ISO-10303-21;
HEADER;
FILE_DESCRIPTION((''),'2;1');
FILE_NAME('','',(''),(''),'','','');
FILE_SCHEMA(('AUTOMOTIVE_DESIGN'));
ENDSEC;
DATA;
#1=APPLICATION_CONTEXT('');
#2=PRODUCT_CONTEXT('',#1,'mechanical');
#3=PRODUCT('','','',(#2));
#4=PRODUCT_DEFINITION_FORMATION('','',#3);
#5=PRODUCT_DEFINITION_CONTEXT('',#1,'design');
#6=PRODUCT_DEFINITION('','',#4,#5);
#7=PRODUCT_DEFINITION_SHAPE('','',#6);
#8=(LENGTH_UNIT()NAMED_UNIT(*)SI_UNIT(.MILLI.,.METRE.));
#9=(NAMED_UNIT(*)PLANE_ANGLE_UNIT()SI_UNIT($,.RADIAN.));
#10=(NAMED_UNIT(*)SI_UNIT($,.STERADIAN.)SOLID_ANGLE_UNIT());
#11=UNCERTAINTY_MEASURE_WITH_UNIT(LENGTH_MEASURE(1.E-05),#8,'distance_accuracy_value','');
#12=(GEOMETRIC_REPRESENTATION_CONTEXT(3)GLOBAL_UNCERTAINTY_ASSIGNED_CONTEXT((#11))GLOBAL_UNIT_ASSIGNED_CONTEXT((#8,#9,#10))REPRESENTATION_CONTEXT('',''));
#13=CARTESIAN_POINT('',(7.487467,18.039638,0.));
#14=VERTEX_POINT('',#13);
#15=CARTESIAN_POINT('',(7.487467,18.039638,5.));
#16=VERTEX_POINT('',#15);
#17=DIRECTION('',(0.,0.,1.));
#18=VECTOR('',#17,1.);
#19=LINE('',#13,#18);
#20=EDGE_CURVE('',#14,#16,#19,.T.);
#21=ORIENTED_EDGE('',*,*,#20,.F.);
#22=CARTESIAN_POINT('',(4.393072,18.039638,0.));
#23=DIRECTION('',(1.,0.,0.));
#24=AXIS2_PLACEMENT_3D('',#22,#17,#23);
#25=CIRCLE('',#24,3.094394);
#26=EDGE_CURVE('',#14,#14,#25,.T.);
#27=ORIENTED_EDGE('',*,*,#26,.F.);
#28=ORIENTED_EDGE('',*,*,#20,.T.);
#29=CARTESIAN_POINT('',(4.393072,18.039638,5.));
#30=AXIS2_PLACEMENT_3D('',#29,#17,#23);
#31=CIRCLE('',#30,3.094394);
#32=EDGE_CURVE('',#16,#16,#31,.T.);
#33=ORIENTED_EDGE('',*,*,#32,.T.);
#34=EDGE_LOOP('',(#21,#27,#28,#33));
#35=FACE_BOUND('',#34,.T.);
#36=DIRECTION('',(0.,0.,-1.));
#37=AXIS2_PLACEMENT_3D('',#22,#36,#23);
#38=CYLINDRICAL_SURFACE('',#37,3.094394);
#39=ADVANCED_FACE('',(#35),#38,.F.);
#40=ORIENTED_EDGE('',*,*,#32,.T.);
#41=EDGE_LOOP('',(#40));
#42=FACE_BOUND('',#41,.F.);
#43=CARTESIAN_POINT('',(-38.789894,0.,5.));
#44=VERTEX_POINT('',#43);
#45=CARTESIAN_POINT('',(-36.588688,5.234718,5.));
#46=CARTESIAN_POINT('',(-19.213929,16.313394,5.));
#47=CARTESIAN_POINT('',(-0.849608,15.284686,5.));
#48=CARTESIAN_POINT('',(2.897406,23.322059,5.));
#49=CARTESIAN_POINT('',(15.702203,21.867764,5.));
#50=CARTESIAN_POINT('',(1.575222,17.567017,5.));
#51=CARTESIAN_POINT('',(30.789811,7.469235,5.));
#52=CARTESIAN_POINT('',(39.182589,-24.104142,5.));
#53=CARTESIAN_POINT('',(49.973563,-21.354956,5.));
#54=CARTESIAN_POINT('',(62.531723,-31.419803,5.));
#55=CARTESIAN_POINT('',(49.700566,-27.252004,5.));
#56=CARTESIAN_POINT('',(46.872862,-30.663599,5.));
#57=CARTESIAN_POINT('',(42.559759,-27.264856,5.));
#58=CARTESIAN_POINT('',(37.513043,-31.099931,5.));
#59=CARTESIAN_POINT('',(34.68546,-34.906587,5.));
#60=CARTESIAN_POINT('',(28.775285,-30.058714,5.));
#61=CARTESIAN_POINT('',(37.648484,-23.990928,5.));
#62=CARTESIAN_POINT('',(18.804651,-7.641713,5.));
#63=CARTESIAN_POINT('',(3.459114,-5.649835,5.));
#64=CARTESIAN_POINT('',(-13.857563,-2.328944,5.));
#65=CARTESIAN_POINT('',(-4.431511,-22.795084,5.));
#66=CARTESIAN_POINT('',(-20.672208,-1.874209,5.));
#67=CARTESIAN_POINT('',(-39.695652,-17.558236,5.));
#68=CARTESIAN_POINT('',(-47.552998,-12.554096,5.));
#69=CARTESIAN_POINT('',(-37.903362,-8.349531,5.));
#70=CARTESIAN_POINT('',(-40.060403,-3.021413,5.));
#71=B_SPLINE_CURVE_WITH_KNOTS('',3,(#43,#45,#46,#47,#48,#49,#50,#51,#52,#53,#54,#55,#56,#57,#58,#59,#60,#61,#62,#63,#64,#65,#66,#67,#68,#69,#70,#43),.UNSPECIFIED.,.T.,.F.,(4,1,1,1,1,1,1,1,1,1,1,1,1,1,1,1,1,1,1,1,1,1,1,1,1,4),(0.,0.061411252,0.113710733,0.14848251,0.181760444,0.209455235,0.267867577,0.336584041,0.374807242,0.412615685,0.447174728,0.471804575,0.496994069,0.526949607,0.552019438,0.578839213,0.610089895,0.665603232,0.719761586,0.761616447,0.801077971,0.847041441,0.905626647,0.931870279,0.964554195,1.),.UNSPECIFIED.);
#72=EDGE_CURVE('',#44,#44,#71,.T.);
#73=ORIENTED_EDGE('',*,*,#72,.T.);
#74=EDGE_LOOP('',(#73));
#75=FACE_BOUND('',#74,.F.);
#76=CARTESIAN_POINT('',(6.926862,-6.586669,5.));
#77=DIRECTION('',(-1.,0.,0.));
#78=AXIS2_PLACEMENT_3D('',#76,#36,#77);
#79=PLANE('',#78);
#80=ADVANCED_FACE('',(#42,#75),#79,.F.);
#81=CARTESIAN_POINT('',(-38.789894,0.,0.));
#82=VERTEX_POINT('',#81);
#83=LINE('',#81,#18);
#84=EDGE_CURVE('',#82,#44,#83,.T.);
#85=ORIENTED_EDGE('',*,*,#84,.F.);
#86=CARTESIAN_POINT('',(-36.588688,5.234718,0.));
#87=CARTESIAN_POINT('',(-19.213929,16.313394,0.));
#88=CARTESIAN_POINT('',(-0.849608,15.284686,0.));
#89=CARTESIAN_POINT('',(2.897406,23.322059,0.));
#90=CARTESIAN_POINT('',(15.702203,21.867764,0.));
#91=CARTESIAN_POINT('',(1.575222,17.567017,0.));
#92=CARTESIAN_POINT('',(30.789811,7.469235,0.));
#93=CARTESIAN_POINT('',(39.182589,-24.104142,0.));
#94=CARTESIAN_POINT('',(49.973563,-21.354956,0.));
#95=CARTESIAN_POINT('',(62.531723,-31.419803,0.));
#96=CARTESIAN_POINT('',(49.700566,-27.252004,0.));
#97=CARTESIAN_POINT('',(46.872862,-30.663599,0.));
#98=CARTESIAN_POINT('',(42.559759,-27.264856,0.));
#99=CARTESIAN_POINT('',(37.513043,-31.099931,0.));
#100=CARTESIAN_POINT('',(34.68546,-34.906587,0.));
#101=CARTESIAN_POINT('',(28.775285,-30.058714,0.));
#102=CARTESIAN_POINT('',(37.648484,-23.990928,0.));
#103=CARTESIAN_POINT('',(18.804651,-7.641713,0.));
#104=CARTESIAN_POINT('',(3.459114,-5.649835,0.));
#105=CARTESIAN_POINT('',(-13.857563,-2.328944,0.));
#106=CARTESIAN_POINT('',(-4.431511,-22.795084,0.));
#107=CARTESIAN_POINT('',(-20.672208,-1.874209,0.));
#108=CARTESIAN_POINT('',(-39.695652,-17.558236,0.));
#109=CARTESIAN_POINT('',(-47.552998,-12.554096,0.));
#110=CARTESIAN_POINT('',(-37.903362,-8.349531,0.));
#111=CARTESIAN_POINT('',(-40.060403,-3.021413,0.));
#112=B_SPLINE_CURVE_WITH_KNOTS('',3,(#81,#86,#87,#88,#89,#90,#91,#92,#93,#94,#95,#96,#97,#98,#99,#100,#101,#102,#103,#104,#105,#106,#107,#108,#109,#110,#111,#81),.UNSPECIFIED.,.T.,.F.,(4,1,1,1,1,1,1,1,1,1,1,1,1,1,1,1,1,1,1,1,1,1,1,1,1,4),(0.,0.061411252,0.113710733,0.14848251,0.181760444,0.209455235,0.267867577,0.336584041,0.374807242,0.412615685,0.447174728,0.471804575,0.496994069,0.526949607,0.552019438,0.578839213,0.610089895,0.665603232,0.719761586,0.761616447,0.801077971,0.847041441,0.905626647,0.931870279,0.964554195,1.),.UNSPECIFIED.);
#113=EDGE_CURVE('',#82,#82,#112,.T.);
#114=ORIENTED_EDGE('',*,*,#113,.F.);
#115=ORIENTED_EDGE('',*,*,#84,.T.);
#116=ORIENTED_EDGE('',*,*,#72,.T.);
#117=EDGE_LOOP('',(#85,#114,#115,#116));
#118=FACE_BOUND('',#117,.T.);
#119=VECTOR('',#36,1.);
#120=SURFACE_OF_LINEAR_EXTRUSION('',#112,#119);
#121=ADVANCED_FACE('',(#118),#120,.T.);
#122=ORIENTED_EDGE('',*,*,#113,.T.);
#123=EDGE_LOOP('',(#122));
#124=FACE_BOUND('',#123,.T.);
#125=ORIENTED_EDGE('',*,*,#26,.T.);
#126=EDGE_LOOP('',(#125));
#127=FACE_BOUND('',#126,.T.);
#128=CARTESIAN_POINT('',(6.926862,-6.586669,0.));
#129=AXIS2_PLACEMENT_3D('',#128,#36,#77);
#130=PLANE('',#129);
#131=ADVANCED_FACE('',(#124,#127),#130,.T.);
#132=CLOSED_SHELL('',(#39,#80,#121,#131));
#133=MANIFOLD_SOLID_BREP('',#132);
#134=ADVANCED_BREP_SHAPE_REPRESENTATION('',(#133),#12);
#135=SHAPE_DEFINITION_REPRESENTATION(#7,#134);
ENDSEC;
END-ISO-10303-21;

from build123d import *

# Parameters (mm, degrees)
F0_R     = 3.0943943122
F1_DEPTH = 5


# Not quite as in the source:
# - the program builds the solid bodies; features that only make, move or delete a surface that nothing else refers to are left out


with BuildPart() as f1:
    # F0 (on Top) → F1 (new body)
    with BuildSketch(Plane.XY):
        with BuildLine():
            add(Edge.make_bspline(
                [(-38.7898944318, 0), (-36.5886882717, 5.2347176768), (-19.2139289512, 16.3133936998), (-0.8496075829, 15.2846860975), (2.8974058921, 23.3220585712), (15.7022032629, 21.8677639262), (1.5752223201, 17.5670170363), (30.7898114217, 7.4692346629), (39.182588697, -24.1041420173), (49.9735628463, -21.3549558985), (62.5317234873, -31.4198025545), (49.7005662866, -27.2520036037), (46.8728615526, -30.6635989566), (42.559758737, -27.2648560936), (37.5130428154, -31.0999311465), (34.6854600743, -34.9065871525), (28.7752852503, -30.0587139408), (37.6484838484, -23.9909281016), (18.8046505453, -7.6417127836), (3.4591141292, -5.6498348987), (-13.8575631831, -2.3289440703), (-4.431511047, -22.7950835488), (-20.6722083593, -1.8742089512), (-39.6956522123, -17.5582357267), (-47.5529982153, -12.5540963539), (-37.9033616866, -8.3495309393), (-40.0604030422, -3.0214134421), (-38.7898944318, 0)],
                knots=[0, 0, 0, 0, 0.0614112523, 0.1137107326, 0.1484825097, 0.1817604444, 0.2094552348, 0.2678675768, 0.3365840409, 0.3748072417, 0.412615685, 0.4471747281, 0.4718045745, 0.4969940691, 0.5269496065, 0.5520194379, 0.578839213, 0.6100898948, 0.6656032315, 0.719761586, 0.7616164467, 0.801077971, 0.8470414407, 0.9056266474, 0.9318702786, 0.9645541948, 1, 1, 1, 1], degree=3))
        make_face()
        with Locations((4.3930723332, 18.0396381766)):
            Circle(F0_R, mode=Mode.SUBTRACT)
    extrude(amount=F1_DEPTH)


solid = f1.part
